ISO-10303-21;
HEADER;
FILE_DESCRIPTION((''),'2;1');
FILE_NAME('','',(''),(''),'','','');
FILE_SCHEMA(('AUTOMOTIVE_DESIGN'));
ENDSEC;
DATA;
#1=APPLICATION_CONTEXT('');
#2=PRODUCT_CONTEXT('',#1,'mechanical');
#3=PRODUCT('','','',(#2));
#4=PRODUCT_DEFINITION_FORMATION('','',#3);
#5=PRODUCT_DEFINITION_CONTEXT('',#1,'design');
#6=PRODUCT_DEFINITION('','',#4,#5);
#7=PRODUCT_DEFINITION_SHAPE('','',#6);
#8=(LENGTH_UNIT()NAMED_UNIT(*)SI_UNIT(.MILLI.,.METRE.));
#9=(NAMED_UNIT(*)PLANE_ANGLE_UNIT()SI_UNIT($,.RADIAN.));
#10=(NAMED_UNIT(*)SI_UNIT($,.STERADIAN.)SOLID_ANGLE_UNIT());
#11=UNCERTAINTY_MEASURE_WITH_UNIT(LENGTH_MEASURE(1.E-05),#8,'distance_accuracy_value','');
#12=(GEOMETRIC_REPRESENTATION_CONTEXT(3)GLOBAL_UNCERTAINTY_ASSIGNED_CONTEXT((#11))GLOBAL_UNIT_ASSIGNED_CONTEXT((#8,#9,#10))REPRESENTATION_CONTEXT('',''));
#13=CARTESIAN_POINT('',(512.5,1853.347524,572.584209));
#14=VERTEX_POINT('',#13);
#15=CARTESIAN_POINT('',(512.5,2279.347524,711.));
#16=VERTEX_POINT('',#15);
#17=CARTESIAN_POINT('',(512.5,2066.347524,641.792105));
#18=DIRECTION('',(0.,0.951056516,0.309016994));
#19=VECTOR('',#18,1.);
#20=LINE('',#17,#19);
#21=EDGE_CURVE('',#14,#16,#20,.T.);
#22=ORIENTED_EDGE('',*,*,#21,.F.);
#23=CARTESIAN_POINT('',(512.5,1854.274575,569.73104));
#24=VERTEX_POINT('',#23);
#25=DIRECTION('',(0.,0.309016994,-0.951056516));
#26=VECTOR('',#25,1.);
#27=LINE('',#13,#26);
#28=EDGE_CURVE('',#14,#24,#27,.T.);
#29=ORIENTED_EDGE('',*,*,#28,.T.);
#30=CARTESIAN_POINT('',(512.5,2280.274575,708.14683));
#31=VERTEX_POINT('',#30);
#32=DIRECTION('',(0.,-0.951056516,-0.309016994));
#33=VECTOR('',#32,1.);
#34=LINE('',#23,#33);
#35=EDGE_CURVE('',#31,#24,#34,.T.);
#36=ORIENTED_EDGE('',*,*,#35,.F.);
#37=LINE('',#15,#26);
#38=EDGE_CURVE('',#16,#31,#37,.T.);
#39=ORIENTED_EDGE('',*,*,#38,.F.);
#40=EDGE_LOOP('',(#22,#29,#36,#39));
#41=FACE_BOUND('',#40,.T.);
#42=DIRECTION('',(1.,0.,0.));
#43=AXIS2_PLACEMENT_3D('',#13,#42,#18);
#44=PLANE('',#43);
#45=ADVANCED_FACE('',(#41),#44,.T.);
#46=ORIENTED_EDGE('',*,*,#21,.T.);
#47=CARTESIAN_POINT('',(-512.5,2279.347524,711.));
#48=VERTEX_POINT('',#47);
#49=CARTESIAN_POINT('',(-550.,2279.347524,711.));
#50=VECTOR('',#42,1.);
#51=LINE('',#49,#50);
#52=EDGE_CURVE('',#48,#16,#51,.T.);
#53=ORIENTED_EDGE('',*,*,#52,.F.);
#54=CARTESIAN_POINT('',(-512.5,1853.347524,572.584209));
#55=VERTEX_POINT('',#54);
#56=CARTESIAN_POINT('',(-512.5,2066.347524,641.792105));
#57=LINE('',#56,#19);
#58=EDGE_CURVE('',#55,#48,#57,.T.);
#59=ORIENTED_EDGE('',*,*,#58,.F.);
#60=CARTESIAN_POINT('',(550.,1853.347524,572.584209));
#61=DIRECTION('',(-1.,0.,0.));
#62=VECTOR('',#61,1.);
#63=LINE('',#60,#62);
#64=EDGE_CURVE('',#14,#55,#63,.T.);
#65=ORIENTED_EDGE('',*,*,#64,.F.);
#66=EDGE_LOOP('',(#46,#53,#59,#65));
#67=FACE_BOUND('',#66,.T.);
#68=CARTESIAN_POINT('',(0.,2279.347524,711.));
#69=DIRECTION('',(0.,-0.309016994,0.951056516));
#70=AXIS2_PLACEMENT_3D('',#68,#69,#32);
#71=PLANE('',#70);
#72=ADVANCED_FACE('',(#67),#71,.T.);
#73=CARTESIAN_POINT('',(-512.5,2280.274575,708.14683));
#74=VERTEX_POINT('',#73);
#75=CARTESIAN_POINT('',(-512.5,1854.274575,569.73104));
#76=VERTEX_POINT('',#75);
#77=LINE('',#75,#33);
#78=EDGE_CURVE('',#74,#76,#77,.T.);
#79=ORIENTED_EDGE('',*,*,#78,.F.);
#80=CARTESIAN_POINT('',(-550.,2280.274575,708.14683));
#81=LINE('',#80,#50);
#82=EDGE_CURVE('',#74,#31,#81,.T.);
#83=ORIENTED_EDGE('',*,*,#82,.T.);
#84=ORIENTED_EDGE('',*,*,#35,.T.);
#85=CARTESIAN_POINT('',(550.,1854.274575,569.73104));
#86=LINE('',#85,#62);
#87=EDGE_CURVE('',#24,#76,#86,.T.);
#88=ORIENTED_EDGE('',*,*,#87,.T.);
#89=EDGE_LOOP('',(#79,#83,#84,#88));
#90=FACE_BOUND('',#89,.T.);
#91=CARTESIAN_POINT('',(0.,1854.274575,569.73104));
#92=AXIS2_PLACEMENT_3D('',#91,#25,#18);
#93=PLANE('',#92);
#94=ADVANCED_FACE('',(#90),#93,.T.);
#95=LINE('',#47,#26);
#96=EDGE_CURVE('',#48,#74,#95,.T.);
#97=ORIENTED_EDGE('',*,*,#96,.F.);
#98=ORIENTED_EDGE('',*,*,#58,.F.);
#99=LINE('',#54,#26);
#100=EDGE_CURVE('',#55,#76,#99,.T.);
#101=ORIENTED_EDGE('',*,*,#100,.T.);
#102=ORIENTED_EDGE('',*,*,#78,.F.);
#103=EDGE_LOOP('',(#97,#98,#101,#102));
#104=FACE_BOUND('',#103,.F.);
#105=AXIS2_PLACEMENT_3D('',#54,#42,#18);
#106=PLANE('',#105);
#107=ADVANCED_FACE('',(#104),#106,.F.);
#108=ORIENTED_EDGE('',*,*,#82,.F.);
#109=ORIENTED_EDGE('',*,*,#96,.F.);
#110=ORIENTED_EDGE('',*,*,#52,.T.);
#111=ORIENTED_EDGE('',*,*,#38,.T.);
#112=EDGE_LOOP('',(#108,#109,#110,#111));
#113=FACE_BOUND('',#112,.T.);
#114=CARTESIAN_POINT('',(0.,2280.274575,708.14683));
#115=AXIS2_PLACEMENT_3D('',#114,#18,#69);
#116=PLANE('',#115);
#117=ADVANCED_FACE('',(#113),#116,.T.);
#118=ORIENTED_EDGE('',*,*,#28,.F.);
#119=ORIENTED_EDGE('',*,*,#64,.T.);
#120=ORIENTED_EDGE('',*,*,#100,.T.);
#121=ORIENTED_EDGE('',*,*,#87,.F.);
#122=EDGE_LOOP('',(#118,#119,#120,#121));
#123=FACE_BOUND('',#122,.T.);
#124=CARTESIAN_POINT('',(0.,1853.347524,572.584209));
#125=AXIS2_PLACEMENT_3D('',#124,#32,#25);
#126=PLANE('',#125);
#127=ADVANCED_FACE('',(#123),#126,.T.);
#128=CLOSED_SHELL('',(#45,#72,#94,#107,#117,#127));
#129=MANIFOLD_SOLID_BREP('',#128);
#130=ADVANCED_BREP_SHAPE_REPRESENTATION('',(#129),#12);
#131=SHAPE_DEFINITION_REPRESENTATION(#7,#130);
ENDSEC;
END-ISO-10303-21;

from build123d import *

# Parameters (mm, degrees)
F1_DEPTH = 550
F2_W     = 37.5
F2_H     = 447.9229075255
F3_DEPTH = 25


# Not quite as in the source:
# - a feature names something its author has since deleted; it is built from what else it names


with BuildPart() as f1:
    # F0 (on Right) → F1 (new body, symmetric)
    with BuildSketch(Plane.YZ):
        Polygon((1854.2745751406, 569.7310398559), (2042.2745751406, 630.8159427477), (2041.3475241575, 633.6691122966), (1853.3475241575, 572.5842094048), align=None)
        Polygon((2041.3475241575, 633.6691122966), (2042.2745751406, 630.8159427477), (2092.2745751406, 647.0619275593), (2091.3475241575, 649.9150971082), align=None)
        Polygon((2091.3475241575, 649.9150971082), (2092.2745751406, 647.0619275593), (2280.2745751406, 708.1468304511), (2279.3475241575, 711), align=None)
    extrude(amount=F1_DEPTH, both=True)

    # F2 (on face) → F3 (cut)
    with BuildSketch(Plane(origin=(0, 8.7006633238, -26.7778882743), x_dir=(1, 0, 0), z_dir=(0, -0.3090169944, 0.9510565163))):
        with Locations((-531.25, 2163.5379449891)):
            Rectangle(F2_W, F2_H)
        with Locations((531.25, 2163.5379449891)):
            Rectangle(F2_W, F2_H)
    extrude(amount=-F3_DEPTH, mode=Mode.SUBTRACT)


solid = f1.part
